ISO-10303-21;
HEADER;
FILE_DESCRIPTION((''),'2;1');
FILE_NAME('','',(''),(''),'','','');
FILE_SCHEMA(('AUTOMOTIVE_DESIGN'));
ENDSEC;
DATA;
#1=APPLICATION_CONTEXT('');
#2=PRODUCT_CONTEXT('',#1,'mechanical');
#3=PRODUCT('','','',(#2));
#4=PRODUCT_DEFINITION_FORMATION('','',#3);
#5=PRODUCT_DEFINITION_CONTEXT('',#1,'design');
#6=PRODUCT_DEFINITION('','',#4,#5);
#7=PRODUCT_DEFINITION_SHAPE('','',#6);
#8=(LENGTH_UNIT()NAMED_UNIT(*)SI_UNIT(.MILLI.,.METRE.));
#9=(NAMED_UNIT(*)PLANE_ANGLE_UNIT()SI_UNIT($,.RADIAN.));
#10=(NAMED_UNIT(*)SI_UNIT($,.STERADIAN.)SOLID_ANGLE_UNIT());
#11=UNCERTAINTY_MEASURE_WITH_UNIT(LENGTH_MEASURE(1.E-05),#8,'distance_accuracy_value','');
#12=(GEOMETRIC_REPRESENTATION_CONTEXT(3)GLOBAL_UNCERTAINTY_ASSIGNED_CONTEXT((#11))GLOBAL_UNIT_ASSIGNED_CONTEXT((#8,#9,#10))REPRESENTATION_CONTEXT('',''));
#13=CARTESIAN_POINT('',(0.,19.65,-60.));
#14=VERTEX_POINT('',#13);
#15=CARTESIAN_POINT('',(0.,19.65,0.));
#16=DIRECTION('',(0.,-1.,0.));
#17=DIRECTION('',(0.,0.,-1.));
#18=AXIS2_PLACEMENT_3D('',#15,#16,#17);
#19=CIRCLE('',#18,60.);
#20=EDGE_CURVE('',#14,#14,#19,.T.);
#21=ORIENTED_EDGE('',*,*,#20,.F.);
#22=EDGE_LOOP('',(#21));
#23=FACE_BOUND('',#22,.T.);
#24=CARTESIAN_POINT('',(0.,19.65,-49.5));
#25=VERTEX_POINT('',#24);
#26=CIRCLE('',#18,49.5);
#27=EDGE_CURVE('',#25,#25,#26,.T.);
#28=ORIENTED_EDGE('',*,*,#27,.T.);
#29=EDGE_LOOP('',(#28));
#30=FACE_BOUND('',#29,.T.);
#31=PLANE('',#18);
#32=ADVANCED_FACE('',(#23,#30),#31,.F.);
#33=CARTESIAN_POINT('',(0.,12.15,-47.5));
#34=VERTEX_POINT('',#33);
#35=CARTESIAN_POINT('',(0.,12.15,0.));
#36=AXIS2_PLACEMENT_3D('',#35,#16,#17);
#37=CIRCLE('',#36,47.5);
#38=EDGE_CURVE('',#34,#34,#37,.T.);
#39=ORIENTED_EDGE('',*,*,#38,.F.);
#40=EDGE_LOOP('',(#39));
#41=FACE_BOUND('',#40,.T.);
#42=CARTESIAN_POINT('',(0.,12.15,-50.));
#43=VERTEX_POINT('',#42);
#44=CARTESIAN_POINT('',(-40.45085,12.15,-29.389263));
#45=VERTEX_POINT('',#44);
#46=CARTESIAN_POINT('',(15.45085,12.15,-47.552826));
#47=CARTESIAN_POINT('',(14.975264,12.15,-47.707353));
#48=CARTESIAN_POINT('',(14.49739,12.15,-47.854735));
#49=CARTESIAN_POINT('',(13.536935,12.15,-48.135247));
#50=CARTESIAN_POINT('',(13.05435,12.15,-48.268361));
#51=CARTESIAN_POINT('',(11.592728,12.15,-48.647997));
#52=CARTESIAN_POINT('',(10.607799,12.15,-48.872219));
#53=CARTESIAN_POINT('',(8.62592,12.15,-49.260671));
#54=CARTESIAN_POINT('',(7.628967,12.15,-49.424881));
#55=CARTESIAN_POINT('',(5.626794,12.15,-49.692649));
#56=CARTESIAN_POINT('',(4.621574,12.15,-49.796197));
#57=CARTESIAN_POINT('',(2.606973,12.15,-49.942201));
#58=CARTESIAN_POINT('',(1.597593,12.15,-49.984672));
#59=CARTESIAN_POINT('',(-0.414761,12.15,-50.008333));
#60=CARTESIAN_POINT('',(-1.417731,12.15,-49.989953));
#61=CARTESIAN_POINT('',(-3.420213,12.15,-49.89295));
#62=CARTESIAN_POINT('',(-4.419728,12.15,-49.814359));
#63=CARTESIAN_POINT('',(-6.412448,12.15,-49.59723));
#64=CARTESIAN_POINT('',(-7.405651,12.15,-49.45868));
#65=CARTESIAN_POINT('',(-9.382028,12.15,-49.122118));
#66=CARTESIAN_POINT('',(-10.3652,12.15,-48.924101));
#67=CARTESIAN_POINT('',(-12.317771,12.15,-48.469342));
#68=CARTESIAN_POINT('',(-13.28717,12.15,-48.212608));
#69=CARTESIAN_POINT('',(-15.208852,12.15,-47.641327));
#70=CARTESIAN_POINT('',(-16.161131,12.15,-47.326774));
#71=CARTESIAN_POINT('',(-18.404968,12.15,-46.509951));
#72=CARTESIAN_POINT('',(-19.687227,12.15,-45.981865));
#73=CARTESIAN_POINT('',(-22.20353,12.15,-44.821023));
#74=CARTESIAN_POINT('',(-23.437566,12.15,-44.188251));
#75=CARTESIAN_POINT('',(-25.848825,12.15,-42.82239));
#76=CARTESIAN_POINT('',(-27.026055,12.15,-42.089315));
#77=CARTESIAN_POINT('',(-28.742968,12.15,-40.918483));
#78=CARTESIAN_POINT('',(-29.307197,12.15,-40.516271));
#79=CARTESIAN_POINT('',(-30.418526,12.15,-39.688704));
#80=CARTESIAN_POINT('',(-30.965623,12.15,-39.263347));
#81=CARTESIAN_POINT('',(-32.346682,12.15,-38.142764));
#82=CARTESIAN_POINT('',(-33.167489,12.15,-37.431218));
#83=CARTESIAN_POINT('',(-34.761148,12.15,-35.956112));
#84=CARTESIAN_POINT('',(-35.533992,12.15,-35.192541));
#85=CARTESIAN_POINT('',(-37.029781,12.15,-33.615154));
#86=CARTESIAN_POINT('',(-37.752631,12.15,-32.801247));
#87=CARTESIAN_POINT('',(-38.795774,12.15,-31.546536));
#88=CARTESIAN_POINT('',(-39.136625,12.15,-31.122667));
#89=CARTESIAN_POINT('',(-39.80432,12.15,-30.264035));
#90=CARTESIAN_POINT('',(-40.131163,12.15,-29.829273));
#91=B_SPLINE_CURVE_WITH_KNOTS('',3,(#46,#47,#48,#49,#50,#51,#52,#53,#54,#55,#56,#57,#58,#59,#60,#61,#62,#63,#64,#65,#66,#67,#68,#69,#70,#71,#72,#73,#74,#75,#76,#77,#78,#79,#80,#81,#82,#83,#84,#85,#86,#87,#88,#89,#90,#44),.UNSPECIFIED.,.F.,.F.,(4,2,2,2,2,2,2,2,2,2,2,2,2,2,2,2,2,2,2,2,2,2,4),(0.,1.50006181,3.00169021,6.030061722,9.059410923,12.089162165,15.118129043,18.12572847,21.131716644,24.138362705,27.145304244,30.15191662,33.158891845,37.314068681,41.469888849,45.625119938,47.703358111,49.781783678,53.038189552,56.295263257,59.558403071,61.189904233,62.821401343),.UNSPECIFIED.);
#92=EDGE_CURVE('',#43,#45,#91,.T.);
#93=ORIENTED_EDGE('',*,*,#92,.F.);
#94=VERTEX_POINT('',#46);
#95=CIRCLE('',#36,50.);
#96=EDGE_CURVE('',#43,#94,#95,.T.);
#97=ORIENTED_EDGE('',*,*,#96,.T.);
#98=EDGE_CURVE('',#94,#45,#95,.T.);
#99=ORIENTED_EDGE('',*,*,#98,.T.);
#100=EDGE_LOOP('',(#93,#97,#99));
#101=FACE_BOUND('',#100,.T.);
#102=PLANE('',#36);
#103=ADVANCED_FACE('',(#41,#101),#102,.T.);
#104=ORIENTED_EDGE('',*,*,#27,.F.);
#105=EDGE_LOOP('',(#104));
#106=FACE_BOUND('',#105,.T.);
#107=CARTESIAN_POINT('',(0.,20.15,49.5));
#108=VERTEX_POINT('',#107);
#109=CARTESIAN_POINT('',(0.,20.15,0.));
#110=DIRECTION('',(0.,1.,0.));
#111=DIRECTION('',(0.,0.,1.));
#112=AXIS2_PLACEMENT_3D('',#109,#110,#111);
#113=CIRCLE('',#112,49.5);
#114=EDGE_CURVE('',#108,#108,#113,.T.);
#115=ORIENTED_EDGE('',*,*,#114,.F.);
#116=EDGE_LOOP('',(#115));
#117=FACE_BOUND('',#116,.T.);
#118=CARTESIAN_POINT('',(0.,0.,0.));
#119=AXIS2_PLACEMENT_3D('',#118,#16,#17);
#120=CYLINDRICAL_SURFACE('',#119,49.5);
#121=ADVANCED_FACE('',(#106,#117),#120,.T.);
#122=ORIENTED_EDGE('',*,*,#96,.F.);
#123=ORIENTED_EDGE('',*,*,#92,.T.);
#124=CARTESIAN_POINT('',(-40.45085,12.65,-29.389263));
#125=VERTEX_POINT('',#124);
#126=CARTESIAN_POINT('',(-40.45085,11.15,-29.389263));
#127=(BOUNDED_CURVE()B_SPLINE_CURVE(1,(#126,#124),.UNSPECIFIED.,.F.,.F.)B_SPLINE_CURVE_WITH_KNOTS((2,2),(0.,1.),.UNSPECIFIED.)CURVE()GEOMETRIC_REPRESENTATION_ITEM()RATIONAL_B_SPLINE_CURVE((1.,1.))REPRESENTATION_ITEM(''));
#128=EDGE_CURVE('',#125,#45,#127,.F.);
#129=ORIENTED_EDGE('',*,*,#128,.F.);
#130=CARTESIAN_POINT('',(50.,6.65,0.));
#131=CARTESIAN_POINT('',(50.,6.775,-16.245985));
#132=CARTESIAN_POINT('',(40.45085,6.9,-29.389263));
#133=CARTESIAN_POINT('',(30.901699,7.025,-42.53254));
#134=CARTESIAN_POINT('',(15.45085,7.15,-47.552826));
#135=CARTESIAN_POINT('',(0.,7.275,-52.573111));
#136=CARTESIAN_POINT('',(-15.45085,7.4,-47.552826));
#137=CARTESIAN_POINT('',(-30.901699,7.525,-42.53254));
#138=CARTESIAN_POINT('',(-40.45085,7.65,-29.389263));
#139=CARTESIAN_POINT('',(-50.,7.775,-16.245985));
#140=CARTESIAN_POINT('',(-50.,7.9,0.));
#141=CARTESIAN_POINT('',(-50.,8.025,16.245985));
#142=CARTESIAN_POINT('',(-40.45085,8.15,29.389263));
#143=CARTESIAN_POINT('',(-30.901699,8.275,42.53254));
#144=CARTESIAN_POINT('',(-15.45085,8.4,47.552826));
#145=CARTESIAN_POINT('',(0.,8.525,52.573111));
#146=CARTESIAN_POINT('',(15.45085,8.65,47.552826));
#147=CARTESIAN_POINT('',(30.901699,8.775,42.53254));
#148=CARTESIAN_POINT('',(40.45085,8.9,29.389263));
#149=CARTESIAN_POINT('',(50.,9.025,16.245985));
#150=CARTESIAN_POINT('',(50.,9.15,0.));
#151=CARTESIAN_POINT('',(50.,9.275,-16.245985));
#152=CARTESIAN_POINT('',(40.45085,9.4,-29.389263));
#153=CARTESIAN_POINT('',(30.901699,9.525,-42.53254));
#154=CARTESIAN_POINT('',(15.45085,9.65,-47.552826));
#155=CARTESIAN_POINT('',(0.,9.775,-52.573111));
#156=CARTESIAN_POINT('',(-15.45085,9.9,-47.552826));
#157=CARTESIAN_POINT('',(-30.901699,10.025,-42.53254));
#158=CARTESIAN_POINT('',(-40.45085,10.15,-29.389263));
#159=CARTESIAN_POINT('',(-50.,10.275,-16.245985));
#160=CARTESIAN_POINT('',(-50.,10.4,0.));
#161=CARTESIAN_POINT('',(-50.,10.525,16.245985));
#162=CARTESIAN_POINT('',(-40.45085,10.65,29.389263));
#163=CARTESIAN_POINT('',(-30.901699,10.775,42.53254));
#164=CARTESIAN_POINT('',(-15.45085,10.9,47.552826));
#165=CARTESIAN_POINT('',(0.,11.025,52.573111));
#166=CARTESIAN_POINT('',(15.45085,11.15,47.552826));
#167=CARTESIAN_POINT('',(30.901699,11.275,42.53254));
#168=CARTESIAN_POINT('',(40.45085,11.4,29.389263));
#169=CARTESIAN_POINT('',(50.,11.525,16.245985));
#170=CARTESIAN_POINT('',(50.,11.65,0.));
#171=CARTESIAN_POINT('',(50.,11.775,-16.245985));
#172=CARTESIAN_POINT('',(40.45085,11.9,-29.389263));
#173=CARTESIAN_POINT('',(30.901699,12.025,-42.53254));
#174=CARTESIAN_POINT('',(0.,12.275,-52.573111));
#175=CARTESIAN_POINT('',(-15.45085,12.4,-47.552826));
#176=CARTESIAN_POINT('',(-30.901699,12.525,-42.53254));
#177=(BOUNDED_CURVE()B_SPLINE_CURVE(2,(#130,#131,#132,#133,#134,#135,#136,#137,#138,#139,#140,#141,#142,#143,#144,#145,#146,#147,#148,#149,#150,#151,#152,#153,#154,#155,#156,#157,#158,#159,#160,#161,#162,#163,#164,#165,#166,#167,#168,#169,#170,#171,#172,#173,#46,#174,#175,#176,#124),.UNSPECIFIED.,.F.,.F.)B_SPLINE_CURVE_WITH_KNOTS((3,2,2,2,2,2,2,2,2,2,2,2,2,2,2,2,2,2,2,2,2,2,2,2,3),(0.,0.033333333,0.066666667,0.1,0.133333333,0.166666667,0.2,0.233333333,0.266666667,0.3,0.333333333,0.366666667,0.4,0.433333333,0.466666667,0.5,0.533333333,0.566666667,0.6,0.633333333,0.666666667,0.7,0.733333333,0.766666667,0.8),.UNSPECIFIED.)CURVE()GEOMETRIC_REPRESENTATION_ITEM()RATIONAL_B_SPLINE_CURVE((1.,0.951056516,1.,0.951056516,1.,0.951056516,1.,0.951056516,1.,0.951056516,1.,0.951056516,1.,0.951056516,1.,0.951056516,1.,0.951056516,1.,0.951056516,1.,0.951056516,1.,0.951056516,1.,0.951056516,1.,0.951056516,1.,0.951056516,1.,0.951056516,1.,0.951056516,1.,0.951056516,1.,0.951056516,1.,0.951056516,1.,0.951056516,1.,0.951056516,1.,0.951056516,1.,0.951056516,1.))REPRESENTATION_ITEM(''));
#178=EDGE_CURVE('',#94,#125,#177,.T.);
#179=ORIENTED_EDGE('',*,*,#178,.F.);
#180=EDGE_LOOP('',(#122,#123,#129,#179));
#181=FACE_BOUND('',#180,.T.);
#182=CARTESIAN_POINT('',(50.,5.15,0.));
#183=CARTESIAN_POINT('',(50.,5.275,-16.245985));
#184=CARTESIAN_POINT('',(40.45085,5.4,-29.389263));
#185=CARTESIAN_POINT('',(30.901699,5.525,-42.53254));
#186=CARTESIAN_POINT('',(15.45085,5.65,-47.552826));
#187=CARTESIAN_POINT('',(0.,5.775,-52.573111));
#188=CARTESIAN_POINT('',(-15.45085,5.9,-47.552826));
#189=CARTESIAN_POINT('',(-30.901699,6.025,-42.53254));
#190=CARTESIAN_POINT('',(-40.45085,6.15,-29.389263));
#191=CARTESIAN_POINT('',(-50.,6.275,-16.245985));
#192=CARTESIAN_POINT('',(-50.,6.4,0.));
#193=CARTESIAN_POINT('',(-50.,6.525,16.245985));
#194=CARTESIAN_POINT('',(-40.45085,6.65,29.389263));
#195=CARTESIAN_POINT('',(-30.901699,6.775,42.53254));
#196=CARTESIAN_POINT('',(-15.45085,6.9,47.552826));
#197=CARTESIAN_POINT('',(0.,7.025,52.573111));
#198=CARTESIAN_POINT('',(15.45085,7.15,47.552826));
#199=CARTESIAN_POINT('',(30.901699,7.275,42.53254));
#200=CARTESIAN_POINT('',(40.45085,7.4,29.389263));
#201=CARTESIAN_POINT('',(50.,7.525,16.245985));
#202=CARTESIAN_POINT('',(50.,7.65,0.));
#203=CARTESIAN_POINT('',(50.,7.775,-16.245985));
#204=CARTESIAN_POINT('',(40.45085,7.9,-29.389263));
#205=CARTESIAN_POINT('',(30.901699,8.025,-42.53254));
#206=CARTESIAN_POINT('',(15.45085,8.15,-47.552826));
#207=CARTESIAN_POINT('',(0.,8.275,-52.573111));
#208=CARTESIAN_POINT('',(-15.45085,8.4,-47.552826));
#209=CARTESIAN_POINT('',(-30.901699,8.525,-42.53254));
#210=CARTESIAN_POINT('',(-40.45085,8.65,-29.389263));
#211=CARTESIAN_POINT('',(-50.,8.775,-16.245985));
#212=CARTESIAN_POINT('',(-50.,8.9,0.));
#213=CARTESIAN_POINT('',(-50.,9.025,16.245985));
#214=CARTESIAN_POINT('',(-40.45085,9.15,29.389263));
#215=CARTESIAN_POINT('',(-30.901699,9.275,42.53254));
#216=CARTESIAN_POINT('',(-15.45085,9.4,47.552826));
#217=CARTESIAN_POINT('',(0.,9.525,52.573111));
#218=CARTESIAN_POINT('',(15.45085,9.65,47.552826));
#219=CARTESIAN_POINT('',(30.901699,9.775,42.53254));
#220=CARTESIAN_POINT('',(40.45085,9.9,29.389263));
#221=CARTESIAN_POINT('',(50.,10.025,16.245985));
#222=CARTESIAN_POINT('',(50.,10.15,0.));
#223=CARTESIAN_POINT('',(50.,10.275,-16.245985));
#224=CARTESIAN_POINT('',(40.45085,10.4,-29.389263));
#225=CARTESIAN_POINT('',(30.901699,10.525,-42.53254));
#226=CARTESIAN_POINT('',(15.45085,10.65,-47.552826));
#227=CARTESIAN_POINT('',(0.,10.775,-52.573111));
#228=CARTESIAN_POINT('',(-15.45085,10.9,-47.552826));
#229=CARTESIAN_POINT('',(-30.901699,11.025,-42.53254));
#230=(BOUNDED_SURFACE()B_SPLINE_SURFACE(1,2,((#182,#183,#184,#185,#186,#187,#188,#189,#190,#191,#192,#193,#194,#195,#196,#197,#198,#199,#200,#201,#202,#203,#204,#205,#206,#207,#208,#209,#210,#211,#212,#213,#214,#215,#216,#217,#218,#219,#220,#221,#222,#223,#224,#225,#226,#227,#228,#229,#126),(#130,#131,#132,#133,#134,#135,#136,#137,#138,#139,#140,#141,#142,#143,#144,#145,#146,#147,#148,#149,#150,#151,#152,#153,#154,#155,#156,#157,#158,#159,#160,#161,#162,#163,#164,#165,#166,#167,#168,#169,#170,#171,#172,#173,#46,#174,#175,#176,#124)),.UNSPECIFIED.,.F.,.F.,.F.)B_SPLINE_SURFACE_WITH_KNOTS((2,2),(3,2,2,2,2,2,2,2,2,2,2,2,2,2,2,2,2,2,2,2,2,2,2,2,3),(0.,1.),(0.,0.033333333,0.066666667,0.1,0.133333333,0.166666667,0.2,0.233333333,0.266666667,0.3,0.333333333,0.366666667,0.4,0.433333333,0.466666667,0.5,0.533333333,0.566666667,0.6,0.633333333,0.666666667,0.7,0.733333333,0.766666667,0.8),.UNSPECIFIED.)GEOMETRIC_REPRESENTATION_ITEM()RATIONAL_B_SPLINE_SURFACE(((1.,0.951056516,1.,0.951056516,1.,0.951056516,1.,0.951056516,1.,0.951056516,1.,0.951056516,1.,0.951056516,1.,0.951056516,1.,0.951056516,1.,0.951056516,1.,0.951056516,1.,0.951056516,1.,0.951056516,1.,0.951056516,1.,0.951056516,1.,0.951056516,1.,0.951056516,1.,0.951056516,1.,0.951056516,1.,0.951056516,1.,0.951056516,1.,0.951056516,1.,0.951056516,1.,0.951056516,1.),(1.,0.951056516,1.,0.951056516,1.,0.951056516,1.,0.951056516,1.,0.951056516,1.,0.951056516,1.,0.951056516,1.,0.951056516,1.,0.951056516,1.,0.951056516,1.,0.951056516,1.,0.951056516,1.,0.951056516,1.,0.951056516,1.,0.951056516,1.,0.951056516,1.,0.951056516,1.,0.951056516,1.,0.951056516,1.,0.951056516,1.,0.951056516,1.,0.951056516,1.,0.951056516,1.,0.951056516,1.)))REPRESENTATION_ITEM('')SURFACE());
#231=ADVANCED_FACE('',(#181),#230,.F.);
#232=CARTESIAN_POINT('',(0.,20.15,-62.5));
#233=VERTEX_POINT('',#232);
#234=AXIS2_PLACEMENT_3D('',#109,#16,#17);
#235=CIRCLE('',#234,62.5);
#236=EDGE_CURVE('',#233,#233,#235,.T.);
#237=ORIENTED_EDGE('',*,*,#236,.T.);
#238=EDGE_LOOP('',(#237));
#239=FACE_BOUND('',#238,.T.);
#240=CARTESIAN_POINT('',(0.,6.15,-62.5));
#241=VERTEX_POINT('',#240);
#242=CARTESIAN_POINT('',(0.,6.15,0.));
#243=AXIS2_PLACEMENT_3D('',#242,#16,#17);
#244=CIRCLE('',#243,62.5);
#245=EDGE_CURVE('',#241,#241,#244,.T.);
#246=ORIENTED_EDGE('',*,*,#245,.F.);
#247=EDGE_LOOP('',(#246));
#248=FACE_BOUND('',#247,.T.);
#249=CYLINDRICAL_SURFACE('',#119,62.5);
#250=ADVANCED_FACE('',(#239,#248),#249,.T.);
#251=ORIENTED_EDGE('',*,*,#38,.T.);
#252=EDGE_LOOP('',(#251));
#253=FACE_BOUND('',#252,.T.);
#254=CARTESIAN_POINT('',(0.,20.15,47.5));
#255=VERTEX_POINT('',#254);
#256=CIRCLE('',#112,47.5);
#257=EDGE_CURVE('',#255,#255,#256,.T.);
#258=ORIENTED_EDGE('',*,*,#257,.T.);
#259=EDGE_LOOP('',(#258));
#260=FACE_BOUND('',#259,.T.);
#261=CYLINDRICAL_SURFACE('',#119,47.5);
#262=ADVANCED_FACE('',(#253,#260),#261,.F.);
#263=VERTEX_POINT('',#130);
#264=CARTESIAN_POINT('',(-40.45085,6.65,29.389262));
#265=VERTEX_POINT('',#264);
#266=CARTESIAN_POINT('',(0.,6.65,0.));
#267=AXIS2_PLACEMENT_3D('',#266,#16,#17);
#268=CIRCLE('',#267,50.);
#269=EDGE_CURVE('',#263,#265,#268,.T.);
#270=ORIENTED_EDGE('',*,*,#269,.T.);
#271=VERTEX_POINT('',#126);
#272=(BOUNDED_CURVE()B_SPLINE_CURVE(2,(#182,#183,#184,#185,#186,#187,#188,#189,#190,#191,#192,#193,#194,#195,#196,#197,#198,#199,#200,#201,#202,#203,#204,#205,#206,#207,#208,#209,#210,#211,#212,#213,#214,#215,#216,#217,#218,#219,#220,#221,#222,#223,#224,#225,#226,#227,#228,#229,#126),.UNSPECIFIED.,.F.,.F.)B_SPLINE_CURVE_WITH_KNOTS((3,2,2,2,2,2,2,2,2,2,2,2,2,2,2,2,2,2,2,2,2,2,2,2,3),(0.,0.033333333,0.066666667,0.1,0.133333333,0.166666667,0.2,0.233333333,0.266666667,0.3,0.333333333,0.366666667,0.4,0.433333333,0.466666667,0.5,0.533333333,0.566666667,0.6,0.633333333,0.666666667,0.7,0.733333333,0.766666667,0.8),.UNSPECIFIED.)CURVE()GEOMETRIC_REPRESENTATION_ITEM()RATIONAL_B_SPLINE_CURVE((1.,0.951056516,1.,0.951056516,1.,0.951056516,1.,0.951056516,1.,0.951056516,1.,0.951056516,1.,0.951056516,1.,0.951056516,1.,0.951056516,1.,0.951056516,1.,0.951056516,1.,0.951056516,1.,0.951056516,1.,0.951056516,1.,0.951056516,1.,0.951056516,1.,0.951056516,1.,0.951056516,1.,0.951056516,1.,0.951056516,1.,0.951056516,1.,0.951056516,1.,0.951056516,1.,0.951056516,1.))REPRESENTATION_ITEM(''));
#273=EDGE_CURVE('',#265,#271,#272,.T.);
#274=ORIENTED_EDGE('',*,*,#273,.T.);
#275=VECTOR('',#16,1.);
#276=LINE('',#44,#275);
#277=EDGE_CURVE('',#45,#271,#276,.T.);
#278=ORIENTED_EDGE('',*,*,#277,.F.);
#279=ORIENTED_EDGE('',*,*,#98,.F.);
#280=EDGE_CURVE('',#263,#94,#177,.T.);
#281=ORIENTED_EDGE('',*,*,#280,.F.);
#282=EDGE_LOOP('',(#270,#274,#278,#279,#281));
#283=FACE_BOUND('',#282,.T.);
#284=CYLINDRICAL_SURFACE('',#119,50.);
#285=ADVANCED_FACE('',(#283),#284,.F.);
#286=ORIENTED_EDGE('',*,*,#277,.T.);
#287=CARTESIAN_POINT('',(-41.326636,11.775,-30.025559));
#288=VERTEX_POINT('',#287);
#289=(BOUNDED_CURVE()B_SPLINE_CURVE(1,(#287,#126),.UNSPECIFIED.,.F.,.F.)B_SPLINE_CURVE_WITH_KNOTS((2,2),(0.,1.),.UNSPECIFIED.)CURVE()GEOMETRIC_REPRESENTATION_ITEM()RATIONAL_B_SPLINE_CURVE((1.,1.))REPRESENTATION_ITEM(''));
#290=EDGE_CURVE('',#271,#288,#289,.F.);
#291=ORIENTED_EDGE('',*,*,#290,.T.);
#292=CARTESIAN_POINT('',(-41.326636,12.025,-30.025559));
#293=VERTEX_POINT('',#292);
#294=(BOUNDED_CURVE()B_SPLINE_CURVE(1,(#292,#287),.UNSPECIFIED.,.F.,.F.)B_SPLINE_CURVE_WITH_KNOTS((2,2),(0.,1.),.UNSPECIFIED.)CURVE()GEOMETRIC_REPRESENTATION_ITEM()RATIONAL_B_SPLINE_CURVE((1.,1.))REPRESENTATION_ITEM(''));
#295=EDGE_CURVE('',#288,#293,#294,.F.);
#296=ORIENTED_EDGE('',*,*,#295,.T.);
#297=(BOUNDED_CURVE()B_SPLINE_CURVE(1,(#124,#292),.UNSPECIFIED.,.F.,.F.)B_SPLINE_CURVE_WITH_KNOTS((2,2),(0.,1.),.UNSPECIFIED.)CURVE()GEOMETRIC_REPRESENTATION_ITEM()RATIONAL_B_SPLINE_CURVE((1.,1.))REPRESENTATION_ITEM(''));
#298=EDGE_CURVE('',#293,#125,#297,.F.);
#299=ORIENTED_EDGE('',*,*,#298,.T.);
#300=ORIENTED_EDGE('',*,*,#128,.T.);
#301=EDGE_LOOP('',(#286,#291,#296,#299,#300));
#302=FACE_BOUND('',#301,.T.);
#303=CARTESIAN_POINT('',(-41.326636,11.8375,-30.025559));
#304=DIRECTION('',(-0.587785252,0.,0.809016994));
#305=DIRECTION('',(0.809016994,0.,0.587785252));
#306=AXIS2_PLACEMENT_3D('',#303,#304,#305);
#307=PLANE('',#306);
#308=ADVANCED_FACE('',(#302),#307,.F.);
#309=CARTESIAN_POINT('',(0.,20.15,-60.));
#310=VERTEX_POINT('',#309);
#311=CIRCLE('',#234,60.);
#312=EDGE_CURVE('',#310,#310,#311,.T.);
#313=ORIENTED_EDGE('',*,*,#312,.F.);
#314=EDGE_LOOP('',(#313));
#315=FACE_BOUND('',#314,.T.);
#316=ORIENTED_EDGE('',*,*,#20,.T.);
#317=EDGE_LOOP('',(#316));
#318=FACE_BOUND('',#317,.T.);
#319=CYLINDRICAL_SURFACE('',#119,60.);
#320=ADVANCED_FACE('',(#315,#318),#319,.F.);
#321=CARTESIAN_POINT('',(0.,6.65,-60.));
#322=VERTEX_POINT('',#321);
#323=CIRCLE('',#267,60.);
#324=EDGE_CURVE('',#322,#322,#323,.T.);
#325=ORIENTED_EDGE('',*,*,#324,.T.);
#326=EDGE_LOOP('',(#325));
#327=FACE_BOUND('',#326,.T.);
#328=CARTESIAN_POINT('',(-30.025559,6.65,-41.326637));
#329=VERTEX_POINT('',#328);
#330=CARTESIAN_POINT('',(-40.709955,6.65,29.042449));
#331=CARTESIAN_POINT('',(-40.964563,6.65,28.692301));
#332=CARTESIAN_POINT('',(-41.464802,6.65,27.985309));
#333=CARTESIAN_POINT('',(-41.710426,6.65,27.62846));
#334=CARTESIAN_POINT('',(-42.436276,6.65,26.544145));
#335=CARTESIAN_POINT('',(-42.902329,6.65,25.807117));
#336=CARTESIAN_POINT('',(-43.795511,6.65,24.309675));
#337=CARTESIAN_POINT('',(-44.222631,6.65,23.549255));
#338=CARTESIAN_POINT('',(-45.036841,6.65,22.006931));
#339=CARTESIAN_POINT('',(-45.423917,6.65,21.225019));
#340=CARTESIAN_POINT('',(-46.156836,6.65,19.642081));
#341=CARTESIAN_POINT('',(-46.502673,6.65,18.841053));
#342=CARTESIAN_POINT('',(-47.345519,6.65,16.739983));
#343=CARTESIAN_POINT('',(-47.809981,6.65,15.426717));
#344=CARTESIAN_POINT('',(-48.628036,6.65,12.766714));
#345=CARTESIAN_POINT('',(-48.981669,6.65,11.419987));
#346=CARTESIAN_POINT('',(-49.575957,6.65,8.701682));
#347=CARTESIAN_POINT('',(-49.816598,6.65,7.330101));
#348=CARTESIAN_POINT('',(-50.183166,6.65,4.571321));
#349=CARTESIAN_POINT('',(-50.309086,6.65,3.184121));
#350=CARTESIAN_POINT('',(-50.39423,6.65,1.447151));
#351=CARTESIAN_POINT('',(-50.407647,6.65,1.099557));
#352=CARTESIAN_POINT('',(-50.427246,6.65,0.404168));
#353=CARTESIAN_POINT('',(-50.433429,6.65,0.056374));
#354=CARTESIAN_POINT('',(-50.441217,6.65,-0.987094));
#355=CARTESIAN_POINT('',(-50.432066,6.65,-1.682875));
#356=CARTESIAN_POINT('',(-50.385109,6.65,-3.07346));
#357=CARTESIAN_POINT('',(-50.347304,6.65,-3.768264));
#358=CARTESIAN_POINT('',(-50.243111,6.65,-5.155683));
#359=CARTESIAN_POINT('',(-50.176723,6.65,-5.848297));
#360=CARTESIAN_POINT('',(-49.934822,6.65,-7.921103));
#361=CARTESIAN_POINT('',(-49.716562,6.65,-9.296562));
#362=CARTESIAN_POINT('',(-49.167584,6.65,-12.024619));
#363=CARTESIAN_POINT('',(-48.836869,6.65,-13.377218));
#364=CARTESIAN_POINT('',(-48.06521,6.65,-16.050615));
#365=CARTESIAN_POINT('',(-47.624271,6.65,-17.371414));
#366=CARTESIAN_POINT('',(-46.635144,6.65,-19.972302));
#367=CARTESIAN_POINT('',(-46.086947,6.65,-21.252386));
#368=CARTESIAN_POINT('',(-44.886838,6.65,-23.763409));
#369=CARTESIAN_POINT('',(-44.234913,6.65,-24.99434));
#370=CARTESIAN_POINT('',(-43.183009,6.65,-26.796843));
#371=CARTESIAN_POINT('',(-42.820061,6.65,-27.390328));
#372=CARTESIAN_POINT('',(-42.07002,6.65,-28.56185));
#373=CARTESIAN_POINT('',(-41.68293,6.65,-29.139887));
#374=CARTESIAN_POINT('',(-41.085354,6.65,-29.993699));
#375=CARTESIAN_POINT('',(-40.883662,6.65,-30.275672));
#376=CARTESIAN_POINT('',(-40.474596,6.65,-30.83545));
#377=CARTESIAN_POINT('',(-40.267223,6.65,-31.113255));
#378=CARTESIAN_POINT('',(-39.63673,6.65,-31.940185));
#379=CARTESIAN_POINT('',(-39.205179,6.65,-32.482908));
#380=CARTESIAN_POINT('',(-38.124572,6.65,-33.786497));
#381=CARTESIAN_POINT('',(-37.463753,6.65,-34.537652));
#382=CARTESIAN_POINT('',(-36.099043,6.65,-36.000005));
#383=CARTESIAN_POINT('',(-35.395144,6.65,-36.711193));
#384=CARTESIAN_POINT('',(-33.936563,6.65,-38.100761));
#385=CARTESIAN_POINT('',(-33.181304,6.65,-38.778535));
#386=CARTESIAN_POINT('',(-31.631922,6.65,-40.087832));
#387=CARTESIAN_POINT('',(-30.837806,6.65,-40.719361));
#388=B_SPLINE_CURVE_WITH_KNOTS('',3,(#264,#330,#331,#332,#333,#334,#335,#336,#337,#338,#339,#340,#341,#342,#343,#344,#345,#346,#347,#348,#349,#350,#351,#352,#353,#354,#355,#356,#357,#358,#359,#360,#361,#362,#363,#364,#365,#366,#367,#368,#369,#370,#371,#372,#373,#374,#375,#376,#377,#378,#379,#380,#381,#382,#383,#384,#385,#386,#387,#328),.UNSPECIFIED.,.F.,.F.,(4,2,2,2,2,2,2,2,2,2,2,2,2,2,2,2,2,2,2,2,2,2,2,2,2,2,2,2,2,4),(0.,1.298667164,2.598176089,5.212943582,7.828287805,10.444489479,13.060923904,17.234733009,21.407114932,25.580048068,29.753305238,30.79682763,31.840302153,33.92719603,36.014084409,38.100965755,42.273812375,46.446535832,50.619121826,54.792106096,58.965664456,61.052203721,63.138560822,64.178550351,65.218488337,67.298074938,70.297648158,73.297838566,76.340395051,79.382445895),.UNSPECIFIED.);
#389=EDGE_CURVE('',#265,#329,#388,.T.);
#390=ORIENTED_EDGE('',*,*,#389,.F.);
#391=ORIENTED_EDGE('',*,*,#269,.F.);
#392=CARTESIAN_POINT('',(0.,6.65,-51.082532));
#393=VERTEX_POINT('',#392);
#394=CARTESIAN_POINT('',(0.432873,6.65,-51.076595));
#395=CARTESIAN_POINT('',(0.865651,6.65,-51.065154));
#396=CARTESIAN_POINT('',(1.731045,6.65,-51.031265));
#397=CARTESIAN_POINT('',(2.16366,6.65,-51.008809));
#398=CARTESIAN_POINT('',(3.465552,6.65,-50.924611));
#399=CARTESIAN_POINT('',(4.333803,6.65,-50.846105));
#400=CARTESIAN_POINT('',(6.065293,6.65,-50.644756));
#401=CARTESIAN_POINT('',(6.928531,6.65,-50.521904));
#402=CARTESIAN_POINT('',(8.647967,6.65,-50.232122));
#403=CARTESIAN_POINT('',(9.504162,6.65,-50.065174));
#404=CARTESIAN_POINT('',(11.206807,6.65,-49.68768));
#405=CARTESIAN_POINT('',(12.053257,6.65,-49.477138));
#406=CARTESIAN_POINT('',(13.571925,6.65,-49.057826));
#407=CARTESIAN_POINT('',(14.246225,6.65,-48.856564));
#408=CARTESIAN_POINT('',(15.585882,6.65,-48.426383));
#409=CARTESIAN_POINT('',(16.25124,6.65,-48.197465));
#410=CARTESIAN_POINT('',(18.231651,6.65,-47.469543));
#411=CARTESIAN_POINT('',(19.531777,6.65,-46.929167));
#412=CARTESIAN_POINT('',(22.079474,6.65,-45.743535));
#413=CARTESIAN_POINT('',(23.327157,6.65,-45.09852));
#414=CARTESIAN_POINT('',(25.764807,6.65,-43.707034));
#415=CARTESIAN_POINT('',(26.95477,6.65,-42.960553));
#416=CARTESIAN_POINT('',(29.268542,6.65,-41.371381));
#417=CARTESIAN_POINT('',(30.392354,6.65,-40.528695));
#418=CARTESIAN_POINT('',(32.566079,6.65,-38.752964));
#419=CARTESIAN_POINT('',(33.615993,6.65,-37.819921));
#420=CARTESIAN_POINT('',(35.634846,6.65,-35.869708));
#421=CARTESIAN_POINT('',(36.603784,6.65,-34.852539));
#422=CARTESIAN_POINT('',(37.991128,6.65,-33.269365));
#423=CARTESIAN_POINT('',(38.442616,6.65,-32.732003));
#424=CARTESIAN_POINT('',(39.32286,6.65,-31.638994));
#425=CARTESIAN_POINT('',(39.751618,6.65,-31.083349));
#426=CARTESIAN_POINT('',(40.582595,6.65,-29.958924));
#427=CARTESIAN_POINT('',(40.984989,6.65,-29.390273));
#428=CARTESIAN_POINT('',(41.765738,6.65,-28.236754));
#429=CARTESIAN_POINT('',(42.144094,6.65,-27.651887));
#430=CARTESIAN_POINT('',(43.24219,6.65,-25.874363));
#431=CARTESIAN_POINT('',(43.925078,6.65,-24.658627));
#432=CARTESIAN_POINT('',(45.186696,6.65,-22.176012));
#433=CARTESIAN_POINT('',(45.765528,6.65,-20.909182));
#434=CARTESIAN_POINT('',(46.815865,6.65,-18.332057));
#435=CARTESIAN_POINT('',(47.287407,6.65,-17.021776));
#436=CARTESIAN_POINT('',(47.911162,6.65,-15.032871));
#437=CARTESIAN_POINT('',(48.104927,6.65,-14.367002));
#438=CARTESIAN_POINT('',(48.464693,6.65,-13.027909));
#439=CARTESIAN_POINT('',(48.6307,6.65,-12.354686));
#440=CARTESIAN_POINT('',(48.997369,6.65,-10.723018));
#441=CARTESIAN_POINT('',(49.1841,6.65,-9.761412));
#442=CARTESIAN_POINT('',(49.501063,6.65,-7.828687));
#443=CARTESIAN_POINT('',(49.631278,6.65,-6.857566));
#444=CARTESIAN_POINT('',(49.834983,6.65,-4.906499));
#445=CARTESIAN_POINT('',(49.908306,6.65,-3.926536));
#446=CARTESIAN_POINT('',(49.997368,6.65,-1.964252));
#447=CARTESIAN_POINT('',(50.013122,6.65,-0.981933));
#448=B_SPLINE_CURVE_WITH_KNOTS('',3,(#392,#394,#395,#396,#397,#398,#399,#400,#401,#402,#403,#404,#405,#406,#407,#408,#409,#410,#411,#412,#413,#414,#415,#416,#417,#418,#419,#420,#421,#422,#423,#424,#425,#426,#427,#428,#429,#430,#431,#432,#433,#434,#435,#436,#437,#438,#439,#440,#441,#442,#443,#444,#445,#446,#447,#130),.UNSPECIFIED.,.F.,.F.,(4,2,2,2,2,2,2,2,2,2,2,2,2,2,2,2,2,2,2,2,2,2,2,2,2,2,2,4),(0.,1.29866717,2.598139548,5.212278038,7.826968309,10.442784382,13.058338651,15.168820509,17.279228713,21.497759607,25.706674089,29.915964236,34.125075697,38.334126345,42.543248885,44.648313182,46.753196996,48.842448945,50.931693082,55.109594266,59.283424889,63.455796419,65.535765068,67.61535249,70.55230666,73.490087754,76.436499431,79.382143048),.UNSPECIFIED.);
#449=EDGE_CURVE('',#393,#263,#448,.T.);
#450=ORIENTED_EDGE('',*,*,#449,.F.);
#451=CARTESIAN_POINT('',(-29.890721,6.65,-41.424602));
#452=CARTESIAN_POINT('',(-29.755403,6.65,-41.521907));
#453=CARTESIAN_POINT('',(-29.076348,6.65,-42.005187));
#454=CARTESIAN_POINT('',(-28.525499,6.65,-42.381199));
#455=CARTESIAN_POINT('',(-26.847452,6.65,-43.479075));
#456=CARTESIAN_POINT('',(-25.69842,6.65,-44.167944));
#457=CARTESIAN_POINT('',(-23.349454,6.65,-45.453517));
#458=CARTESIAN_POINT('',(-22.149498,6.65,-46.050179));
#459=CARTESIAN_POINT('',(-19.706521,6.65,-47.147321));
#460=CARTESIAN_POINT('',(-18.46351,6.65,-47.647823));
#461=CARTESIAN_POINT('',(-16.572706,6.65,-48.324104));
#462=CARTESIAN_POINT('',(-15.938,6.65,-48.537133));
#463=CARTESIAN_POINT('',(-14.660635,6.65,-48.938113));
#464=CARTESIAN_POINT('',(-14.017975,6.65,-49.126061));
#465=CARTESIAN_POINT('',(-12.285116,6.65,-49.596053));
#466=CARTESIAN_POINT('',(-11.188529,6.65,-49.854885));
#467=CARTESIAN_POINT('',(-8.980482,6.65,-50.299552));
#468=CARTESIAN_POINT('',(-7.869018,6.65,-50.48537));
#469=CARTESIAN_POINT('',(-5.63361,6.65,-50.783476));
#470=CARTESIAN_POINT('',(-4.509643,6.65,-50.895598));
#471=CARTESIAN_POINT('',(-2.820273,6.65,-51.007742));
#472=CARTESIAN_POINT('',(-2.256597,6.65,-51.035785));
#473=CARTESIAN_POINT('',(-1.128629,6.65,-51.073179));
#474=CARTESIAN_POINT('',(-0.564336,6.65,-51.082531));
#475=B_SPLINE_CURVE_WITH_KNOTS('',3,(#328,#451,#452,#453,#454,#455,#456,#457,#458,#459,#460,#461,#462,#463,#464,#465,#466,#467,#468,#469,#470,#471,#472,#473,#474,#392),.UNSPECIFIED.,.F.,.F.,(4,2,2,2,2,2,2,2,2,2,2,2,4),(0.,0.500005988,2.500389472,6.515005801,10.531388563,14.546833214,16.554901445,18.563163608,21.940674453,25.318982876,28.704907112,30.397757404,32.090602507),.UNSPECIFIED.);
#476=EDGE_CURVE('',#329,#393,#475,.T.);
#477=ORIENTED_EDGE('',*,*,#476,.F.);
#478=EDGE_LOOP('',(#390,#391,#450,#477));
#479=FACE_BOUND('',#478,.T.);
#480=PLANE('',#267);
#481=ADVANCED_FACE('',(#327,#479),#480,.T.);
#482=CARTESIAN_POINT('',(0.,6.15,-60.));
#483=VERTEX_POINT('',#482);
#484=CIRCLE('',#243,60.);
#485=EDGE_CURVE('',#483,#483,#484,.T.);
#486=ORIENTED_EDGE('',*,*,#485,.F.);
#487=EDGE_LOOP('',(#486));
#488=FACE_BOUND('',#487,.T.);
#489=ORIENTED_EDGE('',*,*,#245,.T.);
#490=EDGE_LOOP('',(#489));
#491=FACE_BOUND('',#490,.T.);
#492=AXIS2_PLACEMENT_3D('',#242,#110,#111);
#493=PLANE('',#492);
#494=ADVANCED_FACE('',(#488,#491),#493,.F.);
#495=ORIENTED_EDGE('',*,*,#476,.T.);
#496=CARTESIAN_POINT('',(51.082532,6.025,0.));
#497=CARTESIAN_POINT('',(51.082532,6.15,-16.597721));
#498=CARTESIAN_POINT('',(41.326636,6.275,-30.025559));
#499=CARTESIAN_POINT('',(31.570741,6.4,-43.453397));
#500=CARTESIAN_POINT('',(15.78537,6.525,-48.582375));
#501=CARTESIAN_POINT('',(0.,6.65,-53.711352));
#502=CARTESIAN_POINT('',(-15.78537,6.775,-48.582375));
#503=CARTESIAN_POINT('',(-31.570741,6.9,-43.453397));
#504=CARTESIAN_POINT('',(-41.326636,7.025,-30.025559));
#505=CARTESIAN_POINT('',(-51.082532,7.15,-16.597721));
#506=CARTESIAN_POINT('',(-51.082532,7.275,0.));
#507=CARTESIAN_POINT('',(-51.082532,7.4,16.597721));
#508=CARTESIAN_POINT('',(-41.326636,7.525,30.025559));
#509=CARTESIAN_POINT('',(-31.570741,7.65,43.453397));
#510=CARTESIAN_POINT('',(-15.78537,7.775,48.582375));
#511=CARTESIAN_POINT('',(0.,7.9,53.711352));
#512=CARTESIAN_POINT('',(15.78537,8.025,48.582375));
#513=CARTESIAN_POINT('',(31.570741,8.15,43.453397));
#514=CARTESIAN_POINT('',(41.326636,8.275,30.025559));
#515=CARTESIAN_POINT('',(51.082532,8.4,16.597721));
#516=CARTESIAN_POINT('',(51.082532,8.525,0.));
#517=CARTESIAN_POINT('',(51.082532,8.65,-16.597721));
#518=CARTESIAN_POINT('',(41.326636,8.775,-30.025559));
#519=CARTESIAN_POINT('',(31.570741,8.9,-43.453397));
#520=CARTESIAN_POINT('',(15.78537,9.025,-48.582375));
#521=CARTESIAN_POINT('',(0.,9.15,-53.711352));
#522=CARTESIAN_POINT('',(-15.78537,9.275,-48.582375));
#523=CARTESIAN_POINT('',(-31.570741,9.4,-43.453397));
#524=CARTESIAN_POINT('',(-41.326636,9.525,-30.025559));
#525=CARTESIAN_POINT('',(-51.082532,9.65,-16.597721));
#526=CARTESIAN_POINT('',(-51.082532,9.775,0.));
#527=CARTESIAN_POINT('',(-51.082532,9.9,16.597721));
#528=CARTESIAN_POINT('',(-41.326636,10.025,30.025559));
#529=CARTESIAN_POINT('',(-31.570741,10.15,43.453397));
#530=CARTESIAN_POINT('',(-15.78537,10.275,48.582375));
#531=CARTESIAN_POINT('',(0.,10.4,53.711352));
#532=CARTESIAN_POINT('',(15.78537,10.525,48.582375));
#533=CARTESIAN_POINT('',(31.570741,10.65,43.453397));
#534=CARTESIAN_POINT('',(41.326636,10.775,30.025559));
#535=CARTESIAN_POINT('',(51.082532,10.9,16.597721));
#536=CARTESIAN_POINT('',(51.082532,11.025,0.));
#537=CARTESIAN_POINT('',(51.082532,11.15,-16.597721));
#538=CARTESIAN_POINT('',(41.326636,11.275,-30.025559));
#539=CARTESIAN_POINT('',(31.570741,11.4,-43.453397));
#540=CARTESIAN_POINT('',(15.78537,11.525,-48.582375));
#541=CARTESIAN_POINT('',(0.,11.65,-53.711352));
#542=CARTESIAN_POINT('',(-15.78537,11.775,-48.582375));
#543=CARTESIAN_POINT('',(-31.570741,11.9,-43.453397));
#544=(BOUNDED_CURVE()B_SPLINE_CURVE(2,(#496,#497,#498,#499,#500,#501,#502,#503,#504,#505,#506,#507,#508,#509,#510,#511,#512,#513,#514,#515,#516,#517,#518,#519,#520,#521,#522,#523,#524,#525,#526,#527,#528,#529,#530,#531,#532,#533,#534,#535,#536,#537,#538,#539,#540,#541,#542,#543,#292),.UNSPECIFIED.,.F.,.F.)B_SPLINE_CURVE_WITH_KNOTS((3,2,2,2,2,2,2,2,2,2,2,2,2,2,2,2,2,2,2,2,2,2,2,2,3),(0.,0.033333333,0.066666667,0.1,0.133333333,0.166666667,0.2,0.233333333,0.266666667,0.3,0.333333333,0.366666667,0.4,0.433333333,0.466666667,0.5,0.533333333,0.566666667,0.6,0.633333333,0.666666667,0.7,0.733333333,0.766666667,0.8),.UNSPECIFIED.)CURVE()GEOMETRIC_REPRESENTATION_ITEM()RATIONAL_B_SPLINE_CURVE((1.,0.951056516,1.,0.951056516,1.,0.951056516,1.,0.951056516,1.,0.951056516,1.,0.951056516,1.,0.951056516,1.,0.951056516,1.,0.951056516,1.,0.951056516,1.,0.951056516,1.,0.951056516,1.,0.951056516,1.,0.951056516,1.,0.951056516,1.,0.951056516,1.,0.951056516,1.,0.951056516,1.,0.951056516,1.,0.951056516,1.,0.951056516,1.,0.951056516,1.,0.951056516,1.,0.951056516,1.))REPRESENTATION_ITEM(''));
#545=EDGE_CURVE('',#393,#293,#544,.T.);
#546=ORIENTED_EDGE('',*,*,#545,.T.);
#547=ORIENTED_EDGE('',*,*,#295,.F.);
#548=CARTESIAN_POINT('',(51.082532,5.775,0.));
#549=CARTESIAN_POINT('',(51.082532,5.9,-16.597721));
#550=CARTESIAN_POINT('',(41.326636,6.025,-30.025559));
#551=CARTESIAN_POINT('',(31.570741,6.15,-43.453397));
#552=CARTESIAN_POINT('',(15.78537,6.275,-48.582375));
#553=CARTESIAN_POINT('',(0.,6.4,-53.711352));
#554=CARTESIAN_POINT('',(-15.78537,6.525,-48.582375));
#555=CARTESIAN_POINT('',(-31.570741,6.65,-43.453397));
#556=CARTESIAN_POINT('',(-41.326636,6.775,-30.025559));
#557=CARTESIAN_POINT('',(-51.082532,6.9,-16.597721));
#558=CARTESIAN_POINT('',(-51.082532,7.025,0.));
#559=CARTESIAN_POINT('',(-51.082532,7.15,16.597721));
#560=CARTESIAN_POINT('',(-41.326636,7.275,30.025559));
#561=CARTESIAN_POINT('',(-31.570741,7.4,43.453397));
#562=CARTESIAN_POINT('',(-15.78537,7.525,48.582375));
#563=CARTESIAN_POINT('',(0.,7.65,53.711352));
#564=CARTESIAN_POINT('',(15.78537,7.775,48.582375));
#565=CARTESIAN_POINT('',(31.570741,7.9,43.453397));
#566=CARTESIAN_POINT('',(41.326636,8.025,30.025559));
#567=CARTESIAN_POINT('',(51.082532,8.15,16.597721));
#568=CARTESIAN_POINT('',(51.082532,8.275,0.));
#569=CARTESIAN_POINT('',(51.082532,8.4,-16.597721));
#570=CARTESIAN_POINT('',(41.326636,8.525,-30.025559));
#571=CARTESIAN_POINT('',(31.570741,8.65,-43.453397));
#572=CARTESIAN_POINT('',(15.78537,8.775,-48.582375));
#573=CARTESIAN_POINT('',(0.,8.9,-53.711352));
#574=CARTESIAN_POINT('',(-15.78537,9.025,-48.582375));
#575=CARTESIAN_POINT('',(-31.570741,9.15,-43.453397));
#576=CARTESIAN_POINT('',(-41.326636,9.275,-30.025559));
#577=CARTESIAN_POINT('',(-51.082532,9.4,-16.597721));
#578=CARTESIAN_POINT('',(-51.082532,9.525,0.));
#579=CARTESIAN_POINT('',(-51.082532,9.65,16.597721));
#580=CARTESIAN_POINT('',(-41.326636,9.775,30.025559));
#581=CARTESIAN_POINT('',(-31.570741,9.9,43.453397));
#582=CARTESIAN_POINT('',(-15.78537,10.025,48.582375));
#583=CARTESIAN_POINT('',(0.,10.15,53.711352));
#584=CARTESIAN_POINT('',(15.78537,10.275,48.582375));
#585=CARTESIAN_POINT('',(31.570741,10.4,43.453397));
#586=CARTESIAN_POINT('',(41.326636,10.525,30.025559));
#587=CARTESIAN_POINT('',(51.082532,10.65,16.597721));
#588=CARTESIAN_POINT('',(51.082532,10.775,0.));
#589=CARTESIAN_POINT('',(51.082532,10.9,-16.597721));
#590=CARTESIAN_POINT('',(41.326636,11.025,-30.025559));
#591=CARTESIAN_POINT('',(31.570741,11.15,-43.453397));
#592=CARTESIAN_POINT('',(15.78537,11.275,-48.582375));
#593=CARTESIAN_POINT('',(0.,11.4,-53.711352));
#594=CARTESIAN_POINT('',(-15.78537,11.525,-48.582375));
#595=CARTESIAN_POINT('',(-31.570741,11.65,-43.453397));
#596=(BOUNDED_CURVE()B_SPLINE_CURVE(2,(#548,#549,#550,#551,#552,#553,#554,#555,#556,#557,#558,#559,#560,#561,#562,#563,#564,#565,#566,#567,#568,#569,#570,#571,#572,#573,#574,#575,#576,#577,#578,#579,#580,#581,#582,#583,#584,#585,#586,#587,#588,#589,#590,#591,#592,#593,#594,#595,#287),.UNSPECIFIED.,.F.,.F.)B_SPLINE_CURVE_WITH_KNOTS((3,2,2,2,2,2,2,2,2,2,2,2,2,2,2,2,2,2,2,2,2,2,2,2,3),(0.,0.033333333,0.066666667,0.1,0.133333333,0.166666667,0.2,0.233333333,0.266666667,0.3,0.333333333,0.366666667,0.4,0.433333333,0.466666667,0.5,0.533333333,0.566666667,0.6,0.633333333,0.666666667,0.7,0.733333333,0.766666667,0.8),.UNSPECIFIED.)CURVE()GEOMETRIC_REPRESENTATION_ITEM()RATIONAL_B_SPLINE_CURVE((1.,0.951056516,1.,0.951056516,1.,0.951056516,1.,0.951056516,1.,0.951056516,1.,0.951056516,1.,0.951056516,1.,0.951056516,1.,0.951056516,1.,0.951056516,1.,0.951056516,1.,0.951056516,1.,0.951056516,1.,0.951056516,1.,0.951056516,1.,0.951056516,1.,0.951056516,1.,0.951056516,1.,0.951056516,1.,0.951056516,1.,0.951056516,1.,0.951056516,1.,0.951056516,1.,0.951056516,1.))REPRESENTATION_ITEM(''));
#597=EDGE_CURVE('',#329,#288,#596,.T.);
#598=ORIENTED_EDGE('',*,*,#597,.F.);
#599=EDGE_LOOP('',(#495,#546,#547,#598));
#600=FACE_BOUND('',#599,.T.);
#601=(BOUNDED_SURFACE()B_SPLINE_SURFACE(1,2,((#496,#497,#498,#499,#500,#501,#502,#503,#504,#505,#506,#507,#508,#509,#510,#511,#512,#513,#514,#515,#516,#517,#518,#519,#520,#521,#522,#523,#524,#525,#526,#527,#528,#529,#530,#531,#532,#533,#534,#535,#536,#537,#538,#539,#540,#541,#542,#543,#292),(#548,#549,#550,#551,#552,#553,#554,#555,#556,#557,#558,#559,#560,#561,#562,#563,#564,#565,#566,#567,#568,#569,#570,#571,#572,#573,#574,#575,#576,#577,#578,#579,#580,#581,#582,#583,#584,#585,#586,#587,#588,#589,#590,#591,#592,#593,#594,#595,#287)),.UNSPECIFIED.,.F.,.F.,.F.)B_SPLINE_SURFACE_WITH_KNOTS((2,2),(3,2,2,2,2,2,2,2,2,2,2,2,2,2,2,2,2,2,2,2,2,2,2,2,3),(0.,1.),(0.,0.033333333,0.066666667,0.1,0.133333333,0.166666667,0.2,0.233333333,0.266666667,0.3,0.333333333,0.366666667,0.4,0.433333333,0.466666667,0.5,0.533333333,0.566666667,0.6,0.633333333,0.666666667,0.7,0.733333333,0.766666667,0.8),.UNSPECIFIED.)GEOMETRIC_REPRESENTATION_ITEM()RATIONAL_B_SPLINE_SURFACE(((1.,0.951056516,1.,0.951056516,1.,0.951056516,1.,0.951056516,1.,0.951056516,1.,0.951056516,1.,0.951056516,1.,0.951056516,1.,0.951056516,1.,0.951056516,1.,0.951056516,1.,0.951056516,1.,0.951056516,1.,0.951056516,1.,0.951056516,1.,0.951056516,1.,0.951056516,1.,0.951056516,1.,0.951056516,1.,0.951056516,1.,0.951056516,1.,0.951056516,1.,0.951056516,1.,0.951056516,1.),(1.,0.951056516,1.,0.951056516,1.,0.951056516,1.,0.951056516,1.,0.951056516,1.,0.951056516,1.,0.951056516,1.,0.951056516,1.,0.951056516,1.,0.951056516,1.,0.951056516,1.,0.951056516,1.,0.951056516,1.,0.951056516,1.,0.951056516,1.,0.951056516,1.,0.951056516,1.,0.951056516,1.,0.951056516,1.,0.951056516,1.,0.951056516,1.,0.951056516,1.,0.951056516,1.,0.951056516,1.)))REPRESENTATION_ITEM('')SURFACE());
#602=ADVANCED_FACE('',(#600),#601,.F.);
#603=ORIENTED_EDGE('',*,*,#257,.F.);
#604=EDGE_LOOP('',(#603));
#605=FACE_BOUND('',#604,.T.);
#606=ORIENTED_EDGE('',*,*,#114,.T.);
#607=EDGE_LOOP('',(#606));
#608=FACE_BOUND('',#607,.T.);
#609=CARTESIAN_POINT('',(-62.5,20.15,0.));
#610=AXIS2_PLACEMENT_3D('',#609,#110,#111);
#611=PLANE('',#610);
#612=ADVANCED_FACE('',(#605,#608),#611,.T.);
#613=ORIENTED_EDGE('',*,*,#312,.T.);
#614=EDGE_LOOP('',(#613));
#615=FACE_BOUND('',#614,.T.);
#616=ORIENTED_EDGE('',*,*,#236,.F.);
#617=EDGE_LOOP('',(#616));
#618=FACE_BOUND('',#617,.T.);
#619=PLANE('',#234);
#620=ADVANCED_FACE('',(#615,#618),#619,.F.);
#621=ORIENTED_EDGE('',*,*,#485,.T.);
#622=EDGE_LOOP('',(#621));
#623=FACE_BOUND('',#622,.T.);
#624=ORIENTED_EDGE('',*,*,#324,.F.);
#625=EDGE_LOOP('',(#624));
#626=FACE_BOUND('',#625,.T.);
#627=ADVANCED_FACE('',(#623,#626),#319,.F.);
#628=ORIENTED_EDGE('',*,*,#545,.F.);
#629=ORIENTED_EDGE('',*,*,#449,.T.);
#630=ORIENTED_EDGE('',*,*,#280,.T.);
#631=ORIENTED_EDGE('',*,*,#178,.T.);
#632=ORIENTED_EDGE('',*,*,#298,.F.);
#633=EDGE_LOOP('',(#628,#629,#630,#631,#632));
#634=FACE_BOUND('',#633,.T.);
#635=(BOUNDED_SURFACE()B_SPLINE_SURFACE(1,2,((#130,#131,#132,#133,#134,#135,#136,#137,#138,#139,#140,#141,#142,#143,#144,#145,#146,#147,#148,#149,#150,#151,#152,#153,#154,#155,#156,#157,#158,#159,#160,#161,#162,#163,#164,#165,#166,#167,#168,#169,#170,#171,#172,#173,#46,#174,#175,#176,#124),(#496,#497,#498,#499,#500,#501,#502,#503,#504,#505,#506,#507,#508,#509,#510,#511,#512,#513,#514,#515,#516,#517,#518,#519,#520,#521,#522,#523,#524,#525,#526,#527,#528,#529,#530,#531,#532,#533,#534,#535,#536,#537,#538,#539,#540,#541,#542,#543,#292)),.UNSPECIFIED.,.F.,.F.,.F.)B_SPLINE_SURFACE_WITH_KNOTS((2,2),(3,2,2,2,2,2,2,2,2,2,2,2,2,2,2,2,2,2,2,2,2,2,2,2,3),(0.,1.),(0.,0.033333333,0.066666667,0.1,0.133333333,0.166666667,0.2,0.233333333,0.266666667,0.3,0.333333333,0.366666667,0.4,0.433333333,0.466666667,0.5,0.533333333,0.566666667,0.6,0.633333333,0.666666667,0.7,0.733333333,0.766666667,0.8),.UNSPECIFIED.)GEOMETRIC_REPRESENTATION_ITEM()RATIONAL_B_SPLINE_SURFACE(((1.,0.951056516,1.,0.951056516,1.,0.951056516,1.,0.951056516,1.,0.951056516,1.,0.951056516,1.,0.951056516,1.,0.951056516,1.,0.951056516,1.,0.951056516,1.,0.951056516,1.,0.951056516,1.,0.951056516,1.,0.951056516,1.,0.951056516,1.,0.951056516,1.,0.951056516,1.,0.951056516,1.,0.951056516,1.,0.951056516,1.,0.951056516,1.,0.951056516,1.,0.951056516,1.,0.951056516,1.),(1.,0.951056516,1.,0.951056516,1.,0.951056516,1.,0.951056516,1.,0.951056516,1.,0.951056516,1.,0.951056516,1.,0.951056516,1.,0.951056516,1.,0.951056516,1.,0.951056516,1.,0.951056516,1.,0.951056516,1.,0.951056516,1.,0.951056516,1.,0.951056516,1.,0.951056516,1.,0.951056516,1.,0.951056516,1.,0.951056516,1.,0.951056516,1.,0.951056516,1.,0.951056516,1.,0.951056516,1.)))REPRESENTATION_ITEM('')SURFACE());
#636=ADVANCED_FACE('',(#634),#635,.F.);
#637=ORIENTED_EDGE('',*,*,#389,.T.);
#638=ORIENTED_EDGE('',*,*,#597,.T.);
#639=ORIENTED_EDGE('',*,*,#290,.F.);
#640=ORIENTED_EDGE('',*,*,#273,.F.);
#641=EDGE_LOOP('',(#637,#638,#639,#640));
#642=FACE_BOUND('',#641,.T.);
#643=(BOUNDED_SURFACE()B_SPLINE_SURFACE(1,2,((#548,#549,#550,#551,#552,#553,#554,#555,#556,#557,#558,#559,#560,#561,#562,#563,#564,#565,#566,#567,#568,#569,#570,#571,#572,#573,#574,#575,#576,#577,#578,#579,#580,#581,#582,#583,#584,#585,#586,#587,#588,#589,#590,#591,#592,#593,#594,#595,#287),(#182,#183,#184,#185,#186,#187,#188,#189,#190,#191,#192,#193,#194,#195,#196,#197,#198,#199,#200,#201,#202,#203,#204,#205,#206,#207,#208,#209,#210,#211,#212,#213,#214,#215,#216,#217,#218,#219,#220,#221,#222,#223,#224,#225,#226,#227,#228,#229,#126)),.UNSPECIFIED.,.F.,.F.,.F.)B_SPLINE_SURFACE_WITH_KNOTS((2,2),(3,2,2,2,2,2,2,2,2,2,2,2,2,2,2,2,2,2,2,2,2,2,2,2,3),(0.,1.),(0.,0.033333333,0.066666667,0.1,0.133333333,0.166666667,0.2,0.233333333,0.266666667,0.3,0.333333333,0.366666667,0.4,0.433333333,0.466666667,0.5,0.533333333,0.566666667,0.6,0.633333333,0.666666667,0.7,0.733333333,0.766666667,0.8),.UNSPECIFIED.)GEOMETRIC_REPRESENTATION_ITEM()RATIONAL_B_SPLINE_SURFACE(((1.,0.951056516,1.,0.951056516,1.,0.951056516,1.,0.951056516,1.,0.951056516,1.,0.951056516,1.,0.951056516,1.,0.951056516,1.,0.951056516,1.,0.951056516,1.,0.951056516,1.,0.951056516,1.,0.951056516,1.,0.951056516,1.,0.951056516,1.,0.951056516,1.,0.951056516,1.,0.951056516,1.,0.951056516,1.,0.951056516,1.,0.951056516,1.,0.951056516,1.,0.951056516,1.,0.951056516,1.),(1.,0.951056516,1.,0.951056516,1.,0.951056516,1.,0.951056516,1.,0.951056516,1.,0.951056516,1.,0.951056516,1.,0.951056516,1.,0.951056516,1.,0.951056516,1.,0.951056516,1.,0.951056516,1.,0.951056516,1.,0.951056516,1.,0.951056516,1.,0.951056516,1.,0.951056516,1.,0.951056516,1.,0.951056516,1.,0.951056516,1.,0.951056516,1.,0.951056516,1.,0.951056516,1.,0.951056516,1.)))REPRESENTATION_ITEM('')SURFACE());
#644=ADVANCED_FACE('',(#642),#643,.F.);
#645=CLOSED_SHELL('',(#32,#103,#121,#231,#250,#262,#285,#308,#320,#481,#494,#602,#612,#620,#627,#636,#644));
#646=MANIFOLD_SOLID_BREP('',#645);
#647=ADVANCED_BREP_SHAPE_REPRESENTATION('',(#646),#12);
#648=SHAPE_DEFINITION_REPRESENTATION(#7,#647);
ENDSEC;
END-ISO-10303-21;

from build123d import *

# Parameters (mm, degrees)
THREAD1_PITCH           = 2.5
THREAD2_PITCH           = 2.5
SKETCH3_W               = 15
SKETCH3_H               = 10
CUT_EXTRUDE1_DEPTH      = 96.495209461
CUT_EXTRUDE2_DEPTH      = 96.495209461
CUT_EXTRUDE2_DEPTH_BACK = 96.495209461
SKETCH4_W               = 125
SKETCH4_H               = 20.019774924


with BuildPart() as part:
    # Sketch2 → Revolve1 (revolve)
    with BuildSketch(Plane(origin=(0, 0, 0), x_dir=(0, 0, -1), z_dir=(1, 0, 0))):
        Polygon((49.5, 36.15), (47.5, 36.15), (47.5, 12.15), (50, 12.15), (50, 6.65), (60, 6.65), (60, 6.15), (62.5, 6.15), (62.5, 20.15), (60, 20.15), (60, 19.65), (49.5, 19.65), align=None)
    revolve(axis=Axis((0, 0, 0), (0, 1, 0)))

    # Thread1: arcs per turn and ends read off the stored shape
    # Thread1: the profile of Thread Profile1 profile screwed along a right-hand helix through 2.4 turns, 10 arcs to a turn; built about Z, then put on its axis
    thread1_z = Axis((0, 0, 0), (0, 0, 1))
    thread1_corners = [(-40.450607014, -29.389086279, -6.000173205), (-41.326636301, -30.025558812, -5.375000003), (-41.326636301, -30.025558812, -5.125000003), (-40.450607014, -29.389086279, -4.4998268)]
    with BuildLine(mode=Mode.PRIVATE) as thread1_profile:
        Line(thread1_corners[0], thread1_corners[1])
        Line(thread1_corners[1], thread1_corners[2])
        Line(thread1_corners[2], thread1_corners[3])
        Line(thread1_corners[3], thread1_corners[0])
    thread1_cap = Face(thread1_profile.wire())
    thread1_turn_angles = [0, 18, 36, 54, 72, 90, 108, 126, 144, 162, 180, 198, 216, 234, 252, 270, 288, 306, 324, 342, 360]
    thread1_turn_weights = [1, 0.9510565162951535, 1, 0.9510565162951535, 1, 0.9510565162951535, 1, 0.9510565162951535, 1, 0.9510565162951535, 1, 0.9510565162951535, 1, 0.9510565162951535, 1, 0.9510565162951535, 1, 0.9510565162951535, 1, 0.9510565162951535, 1]
    thread1_turn_rails = [Edge.make_bspline([Vector(p[0], p[1], 0).rotate(thread1_z, thread1_turn_angles[k]) / thread1_turn_weights[k] + Vector(0, 0, p[2] + THREAD1_PITCH * thread1_turn_angles[k] / 360) for k in range(21)], [0, 0, 0, 1, 1, 2, 2, 3, 3, 4, 4, 5, 5, 6, 6, 7, 7, 8, 8, 9, 9, 10, 10, 10], 2, thread1_turn_weights) for p in thread1_corners]
    thread1_turn_sides = [Face.make_surface_from_curves(thread1_turn_rails[p[0]], thread1_turn_rails[p[1]]) for p in [(0, 1), (1, 2), (2, 3), (3, 0)]]
    thread1_last_angles = [720, 738, 756, 774, 792, 810, 828, 846, 864]
    thread1_last_weights = [1, 0.9510565162951535, 1, 0.9510565162951535, 1, 0.9510565162951535, 1, 0.9510565162951535, 1]
    thread1_last_rails = [Edge.make_bspline([Vector(p[0], p[1], 0).rotate(thread1_z, thread1_last_angles[k]) / thread1_last_weights[k] + Vector(0, 0, p[2] + THREAD1_PITCH * thread1_last_angles[k] / 360) for k in range(9)], [0, 0, 0, 1, 1, 2, 2, 3, 3, 4, 4, 4], 2, thread1_last_weights) for p in thread1_corners]
    thread1_last_sides = [Face.make_surface_from_curves(thread1_last_rails[p[0]], thread1_last_rails[p[1]]) for p in [(0, 1), (1, 2), (2, 3), (3, 0)]]
    thread1 = Plane(origin=(0, 6.65, 0), x_dir=(1, 0, 0), z_dir=(0, -1, 0)) * Solid(Shell([*[p.moved(Location((0, 0, THREAD1_PITCH * i))) for i in range(2) for p in thread1_turn_sides], *thread1_last_sides, thread1_cap, thread1_cap.rotate(thread1_z, 864).moved(Location((0, 0, THREAD1_PITCH * 864 / 360)))]))
    add(thread1, mode=Mode.SUBTRACT)

    # Thread2: arcs per turn and ends read off the stored shape
    # Thread2: the profile of Thread Profile2 profile screwed along a right-hand helix through 1.6 turns, 10 arcs to a turn; built about Z, then put on its axis
    thread2_z = Axis((0, 0, 0), (0, 0, 1))
    thread2_corners = [(49.4997, 0, -0.000173205), (50.58253175, 0, 0.624999997), (50.58253175, 0, 0.874999997), (49.4997, 0, 1.5001732)]
    with BuildLine(mode=Mode.PRIVATE) as thread2_profile:
        Line(thread2_corners[0], thread2_corners[1])
        Line(thread2_corners[1], thread2_corners[2])
        Line(thread2_corners[2], thread2_corners[3])
        Line(thread2_corners[3], thread2_corners[0])
    thread2_cap = Face(thread2_profile.wire())
    thread2_turn_angles = [0, 18, 36, 54, 72, 90, 108, 126, 144, 162, 180, 198, 216, 234, 252, 270, 288, 306, 324, 342, 360]
    thread2_turn_weights = [1, 0.9510565162951535, 1, 0.9510565162951535, 1, 0.9510565162951535, 1, 0.9510565162951535, 1, 0.9510565162951535, 1, 0.9510565162951535, 1, 0.9510565162951535, 1, 0.9510565162951535, 1, 0.9510565162951535, 1, 0.9510565162951535, 1]
    thread2_turn_rails = [Edge.make_bspline([Vector(p[0], p[1], 0).rotate(thread2_z, thread2_turn_angles[k]) / thread2_turn_weights[k] + Vector(0, 0, p[2] + THREAD2_PITCH * thread2_turn_angles[k] / 360) for k in range(21)], [0, 0, 0, 1, 1, 2, 2, 3, 3, 4, 4, 5, 5, 6, 6, 7, 7, 8, 8, 9, 9, 10, 10, 10], 2, thread2_turn_weights) for p in thread2_corners]
    thread2_turn_sides = [Face.make_surface_from_curves(thread2_turn_rails[p[0]], thread2_turn_rails[p[1]]) for p in [(0, 1), (1, 2), (2, 3), (3, 0)]]
    thread2_last_angles = [360, 378, 396, 414, 432, 450, 468, 486, 504, 522, 540, 558, 576]
    thread2_last_weights = [1, 0.9510565162951535, 1, 0.9510565162951535, 1, 0.9510565162951535, 1, 0.9510565162951535, 1, 0.9510565162951535, 1, 0.9510565162951535, 1]
    thread2_last_rails = [Edge.make_bspline([Vector(p[0], p[1], 0).rotate(thread2_z, thread2_last_angles[k]) / thread2_last_weights[k] + Vector(0, 0, p[2] + THREAD2_PITCH * thread2_last_angles[k] / 360) for k in range(13)], [0, 0, 0, 1, 1, 2, 2, 3, 3, 4, 4, 5, 5, 6, 6, 6], 2, thread2_last_weights) for p in thread2_corners]
    thread2_last_sides = [Face.make_surface_from_curves(thread2_last_rails[p[0]], thread2_last_rails[p[1]]) for p in [(0, 1), (1, 2), (2, 3), (3, 0)]]
    thread2 = Plane(origin=(0, 36.15, 0), x_dir=(-1, 0, 0), z_dir=(0, -1, 0)) * Solid(Shell([*thread2_turn_sides, *thread2_last_sides, thread2_cap, thread2_cap.rotate(thread2_z, 576).moved(Location((0, 0, THREAD2_PITCH * 576 / 360)))]))
    add(thread2)

    # Sketch3 → Cut-Extrude1 (cut, through all)
    with BuildSketch(Plane.XY):
        with Locations((0, 25.587500003)):
            Rectangle(SKETCH3_W, SKETCH3_H)
    extrude(amount=-CUT_EXTRUDE1_DEPTH, mode=Mode.SUBTRACT)

    # Sketch4 → Cut-Extrude2 (cut, two sides: drawn at the far end of the back side and taken through both)
    with BuildSketch(Plane(origin=(0, 0, 0), x_dir=(0, 0, -1), z_dir=(1, 0, 0)).offset(-CUT_EXTRUDE2_DEPTH_BACK)):
        with Locations((0, 30.159887462)):
            Rectangle(SKETCH4_W, SKETCH4_H)
    extrude(amount=CUT_EXTRUDE2_DEPTH + CUT_EXTRUDE2_DEPTH_BACK, mode=Mode.SUBTRACT)


solid = part.part
